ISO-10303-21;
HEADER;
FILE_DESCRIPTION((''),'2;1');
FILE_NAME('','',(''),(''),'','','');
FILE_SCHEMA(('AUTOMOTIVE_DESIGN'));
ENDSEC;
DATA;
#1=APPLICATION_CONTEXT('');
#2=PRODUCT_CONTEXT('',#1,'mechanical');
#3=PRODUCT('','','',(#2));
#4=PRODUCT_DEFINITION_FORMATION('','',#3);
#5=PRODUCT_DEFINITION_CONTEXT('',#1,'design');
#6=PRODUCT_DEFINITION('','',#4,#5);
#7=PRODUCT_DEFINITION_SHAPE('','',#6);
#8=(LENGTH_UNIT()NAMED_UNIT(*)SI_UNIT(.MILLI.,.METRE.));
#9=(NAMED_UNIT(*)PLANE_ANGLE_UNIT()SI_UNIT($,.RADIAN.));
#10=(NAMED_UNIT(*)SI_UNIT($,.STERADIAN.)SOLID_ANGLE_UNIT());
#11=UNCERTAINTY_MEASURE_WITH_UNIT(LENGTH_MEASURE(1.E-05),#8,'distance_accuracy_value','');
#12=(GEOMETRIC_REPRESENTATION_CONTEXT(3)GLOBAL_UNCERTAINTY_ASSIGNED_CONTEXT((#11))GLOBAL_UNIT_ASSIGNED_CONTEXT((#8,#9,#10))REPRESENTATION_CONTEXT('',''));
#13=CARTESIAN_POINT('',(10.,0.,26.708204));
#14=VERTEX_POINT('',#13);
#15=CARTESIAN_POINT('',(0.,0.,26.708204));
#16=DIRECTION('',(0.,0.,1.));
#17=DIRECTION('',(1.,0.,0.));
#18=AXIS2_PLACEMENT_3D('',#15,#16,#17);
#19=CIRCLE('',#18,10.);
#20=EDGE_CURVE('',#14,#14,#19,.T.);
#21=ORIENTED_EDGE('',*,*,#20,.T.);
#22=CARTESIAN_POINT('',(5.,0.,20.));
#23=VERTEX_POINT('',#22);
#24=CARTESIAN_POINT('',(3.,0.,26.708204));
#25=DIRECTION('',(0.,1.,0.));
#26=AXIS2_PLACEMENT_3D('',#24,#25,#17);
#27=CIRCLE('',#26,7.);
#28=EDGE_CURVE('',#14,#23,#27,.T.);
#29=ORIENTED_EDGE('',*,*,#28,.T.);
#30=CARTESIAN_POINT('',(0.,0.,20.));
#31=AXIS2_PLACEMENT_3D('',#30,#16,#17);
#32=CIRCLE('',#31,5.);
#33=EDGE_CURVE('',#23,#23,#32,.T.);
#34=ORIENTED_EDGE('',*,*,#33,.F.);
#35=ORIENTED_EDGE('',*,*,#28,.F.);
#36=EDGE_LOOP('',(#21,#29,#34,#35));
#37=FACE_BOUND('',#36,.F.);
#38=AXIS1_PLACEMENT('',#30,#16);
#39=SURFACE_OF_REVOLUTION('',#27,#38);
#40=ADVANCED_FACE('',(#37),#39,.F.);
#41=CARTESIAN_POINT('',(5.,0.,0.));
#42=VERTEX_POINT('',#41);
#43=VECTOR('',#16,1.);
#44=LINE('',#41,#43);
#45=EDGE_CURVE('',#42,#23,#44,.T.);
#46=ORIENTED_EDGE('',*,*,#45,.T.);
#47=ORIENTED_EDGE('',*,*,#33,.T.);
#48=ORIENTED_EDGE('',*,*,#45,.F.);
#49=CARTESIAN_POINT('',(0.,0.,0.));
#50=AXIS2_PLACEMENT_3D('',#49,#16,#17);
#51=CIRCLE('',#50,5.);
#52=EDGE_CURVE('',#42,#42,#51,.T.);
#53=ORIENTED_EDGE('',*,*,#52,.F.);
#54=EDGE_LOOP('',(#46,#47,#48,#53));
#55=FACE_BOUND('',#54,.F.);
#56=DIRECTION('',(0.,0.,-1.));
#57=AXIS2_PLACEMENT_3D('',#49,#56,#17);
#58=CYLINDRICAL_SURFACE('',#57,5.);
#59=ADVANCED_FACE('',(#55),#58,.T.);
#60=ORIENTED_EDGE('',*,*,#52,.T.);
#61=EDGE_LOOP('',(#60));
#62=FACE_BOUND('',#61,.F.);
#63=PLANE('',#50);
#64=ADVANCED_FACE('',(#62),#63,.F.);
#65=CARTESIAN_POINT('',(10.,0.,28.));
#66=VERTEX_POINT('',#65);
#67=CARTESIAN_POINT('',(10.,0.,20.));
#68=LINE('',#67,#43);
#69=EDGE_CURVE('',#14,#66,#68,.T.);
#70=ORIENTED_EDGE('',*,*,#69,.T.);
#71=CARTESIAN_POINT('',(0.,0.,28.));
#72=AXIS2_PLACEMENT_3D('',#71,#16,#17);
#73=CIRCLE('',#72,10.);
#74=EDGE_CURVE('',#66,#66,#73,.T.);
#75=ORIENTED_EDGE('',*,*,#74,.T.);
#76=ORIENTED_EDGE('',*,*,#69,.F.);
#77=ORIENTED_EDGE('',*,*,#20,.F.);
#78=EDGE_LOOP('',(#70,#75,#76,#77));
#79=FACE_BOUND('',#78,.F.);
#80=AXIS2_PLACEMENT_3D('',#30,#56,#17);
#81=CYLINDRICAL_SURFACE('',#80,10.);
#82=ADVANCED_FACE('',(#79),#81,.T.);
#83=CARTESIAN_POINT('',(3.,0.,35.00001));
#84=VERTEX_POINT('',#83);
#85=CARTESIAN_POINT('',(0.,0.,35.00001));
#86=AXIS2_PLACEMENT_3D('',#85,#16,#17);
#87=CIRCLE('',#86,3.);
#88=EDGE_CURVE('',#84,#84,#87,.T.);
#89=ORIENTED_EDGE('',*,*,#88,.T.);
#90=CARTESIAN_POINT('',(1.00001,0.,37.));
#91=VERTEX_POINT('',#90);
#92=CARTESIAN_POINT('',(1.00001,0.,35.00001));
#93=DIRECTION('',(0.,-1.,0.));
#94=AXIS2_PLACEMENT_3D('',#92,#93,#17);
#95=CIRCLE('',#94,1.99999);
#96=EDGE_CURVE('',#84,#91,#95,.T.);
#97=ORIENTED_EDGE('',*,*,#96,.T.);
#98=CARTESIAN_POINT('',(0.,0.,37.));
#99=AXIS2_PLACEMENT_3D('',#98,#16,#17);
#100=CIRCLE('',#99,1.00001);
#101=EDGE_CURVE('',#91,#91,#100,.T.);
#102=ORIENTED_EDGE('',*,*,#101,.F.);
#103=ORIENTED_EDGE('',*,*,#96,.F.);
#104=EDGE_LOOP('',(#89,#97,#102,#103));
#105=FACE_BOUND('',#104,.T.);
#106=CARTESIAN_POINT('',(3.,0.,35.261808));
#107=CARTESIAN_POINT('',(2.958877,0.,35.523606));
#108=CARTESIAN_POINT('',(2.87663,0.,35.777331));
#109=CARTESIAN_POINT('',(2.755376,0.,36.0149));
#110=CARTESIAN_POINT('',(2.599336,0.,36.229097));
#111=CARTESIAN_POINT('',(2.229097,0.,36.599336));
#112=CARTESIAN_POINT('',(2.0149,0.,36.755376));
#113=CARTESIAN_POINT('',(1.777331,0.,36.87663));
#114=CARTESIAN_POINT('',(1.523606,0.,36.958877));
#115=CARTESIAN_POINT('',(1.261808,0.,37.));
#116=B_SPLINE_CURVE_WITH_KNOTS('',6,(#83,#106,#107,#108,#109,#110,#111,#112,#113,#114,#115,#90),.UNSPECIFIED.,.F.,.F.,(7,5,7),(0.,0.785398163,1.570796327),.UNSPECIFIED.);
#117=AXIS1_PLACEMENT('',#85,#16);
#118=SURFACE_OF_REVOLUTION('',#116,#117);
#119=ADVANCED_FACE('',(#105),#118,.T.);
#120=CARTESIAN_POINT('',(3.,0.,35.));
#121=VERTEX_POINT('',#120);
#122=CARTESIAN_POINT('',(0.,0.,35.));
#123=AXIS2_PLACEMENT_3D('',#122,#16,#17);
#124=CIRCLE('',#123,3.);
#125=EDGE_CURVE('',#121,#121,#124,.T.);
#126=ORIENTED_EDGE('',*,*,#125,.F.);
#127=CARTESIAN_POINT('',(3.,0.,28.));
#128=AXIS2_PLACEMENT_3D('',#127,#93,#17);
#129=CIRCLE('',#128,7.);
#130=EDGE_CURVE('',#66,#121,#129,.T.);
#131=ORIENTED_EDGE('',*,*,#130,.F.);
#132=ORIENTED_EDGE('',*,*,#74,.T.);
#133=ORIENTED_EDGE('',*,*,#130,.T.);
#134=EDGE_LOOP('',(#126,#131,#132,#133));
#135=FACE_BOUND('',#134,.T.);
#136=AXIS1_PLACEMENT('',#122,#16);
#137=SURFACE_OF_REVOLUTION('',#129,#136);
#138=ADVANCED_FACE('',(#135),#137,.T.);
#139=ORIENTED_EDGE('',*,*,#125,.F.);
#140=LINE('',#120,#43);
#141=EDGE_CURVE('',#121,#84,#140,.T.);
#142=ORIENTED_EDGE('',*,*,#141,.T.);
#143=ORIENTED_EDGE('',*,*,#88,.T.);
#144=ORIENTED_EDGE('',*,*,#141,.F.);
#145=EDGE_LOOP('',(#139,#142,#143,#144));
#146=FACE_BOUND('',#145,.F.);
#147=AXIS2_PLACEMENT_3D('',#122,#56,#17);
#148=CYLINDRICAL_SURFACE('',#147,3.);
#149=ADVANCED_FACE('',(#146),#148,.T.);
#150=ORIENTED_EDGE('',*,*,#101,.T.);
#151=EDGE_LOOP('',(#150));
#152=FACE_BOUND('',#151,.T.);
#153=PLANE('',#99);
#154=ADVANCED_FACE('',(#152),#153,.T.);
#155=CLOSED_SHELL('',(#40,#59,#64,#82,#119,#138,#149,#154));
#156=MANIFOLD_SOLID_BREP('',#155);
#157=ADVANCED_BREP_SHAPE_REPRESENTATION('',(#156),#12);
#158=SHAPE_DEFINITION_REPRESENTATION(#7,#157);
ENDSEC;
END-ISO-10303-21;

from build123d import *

# Parameters (mm, degrees)
F0_R     = 5
F1_DEPTH = 20
F2_R     = 10
F2_R_2   = 5
F3_DEPTH = 15
F5_DEPTH = 2
F6_R     = 1.99999


# Not quite as in the source:
# - a fillet or chamfer that OpenCascade refuses, or shapes differently, is made with other operations: its cross-section is extruded or revolved along the edge and cut away or added
# - a fillet or chamfer is up to 0.001 mm smaller than in the source, because OpenCascade refuses the exact size


with BuildPart() as f1:
    # F0 (on Top) → F1 (new body)
    with BuildSketch(Plane.XY):
        Circle(F0_R)
    extrude(amount=F1_DEPTH)

    # F2 (on face) → F3 (join)
    with BuildSketch(Plane.XY.offset(20)):
        Circle(F2_R)
        Circle(F2_R_2, mode=Mode.SUBTRACT)
        Circle(F2_R_2)
    extrude(amount=F3_DEPTH)

    # F4: fillet of radius 7 on 2 edges, made by hand

    # F4_s1 → F4_t2 (revolve, cut)
    with BuildSketch(Plane.XZ):
        with BuildLine():
            ThreePointArc((10, 28), (7.9497474683, 32.9497474683), (3, 35))
            Line((3, 35), (10, 35))
            Line((10, 35), (10, 28))
        make_face()
    revolve(axis=Axis((0, 0, 35), (0, 0, 1)), mode=Mode.SUBTRACT)

    # F4_s3 → F4_t4 (revolve, cut)
    with BuildSketch(Plane.XZ):
        with BuildLine():
            ThreePointArc((10, 26.7082039325), (8.6124860802, 22.5249037998), (5, 20))
            Line((5, 20), (10, 20))
            Line((10, 20), (10, 26.7082039325))
        make_face()
    revolve(axis=Axis((0, 0, 20), (0, 0, 1)), mode=Mode.SUBTRACT)

    # F5 (add): a face of the model
    f5_faces = [f1.faces().sort_by_distance(p)[0] for p in [
        (0, 0, 35),
    ]]
    extrude(f5_faces, amount=F5_DEPTH)

    # F6 (radius 2 in the source; OpenCascade refuses exactly that, so slightly less here)
    f6_edges = [f1.edges().sort_by_distance(p)[0] for p in [
        (-3, 0, 37),
    ]]
    fillet(f6_edges, radius=F6_R)


solid = f1.part
